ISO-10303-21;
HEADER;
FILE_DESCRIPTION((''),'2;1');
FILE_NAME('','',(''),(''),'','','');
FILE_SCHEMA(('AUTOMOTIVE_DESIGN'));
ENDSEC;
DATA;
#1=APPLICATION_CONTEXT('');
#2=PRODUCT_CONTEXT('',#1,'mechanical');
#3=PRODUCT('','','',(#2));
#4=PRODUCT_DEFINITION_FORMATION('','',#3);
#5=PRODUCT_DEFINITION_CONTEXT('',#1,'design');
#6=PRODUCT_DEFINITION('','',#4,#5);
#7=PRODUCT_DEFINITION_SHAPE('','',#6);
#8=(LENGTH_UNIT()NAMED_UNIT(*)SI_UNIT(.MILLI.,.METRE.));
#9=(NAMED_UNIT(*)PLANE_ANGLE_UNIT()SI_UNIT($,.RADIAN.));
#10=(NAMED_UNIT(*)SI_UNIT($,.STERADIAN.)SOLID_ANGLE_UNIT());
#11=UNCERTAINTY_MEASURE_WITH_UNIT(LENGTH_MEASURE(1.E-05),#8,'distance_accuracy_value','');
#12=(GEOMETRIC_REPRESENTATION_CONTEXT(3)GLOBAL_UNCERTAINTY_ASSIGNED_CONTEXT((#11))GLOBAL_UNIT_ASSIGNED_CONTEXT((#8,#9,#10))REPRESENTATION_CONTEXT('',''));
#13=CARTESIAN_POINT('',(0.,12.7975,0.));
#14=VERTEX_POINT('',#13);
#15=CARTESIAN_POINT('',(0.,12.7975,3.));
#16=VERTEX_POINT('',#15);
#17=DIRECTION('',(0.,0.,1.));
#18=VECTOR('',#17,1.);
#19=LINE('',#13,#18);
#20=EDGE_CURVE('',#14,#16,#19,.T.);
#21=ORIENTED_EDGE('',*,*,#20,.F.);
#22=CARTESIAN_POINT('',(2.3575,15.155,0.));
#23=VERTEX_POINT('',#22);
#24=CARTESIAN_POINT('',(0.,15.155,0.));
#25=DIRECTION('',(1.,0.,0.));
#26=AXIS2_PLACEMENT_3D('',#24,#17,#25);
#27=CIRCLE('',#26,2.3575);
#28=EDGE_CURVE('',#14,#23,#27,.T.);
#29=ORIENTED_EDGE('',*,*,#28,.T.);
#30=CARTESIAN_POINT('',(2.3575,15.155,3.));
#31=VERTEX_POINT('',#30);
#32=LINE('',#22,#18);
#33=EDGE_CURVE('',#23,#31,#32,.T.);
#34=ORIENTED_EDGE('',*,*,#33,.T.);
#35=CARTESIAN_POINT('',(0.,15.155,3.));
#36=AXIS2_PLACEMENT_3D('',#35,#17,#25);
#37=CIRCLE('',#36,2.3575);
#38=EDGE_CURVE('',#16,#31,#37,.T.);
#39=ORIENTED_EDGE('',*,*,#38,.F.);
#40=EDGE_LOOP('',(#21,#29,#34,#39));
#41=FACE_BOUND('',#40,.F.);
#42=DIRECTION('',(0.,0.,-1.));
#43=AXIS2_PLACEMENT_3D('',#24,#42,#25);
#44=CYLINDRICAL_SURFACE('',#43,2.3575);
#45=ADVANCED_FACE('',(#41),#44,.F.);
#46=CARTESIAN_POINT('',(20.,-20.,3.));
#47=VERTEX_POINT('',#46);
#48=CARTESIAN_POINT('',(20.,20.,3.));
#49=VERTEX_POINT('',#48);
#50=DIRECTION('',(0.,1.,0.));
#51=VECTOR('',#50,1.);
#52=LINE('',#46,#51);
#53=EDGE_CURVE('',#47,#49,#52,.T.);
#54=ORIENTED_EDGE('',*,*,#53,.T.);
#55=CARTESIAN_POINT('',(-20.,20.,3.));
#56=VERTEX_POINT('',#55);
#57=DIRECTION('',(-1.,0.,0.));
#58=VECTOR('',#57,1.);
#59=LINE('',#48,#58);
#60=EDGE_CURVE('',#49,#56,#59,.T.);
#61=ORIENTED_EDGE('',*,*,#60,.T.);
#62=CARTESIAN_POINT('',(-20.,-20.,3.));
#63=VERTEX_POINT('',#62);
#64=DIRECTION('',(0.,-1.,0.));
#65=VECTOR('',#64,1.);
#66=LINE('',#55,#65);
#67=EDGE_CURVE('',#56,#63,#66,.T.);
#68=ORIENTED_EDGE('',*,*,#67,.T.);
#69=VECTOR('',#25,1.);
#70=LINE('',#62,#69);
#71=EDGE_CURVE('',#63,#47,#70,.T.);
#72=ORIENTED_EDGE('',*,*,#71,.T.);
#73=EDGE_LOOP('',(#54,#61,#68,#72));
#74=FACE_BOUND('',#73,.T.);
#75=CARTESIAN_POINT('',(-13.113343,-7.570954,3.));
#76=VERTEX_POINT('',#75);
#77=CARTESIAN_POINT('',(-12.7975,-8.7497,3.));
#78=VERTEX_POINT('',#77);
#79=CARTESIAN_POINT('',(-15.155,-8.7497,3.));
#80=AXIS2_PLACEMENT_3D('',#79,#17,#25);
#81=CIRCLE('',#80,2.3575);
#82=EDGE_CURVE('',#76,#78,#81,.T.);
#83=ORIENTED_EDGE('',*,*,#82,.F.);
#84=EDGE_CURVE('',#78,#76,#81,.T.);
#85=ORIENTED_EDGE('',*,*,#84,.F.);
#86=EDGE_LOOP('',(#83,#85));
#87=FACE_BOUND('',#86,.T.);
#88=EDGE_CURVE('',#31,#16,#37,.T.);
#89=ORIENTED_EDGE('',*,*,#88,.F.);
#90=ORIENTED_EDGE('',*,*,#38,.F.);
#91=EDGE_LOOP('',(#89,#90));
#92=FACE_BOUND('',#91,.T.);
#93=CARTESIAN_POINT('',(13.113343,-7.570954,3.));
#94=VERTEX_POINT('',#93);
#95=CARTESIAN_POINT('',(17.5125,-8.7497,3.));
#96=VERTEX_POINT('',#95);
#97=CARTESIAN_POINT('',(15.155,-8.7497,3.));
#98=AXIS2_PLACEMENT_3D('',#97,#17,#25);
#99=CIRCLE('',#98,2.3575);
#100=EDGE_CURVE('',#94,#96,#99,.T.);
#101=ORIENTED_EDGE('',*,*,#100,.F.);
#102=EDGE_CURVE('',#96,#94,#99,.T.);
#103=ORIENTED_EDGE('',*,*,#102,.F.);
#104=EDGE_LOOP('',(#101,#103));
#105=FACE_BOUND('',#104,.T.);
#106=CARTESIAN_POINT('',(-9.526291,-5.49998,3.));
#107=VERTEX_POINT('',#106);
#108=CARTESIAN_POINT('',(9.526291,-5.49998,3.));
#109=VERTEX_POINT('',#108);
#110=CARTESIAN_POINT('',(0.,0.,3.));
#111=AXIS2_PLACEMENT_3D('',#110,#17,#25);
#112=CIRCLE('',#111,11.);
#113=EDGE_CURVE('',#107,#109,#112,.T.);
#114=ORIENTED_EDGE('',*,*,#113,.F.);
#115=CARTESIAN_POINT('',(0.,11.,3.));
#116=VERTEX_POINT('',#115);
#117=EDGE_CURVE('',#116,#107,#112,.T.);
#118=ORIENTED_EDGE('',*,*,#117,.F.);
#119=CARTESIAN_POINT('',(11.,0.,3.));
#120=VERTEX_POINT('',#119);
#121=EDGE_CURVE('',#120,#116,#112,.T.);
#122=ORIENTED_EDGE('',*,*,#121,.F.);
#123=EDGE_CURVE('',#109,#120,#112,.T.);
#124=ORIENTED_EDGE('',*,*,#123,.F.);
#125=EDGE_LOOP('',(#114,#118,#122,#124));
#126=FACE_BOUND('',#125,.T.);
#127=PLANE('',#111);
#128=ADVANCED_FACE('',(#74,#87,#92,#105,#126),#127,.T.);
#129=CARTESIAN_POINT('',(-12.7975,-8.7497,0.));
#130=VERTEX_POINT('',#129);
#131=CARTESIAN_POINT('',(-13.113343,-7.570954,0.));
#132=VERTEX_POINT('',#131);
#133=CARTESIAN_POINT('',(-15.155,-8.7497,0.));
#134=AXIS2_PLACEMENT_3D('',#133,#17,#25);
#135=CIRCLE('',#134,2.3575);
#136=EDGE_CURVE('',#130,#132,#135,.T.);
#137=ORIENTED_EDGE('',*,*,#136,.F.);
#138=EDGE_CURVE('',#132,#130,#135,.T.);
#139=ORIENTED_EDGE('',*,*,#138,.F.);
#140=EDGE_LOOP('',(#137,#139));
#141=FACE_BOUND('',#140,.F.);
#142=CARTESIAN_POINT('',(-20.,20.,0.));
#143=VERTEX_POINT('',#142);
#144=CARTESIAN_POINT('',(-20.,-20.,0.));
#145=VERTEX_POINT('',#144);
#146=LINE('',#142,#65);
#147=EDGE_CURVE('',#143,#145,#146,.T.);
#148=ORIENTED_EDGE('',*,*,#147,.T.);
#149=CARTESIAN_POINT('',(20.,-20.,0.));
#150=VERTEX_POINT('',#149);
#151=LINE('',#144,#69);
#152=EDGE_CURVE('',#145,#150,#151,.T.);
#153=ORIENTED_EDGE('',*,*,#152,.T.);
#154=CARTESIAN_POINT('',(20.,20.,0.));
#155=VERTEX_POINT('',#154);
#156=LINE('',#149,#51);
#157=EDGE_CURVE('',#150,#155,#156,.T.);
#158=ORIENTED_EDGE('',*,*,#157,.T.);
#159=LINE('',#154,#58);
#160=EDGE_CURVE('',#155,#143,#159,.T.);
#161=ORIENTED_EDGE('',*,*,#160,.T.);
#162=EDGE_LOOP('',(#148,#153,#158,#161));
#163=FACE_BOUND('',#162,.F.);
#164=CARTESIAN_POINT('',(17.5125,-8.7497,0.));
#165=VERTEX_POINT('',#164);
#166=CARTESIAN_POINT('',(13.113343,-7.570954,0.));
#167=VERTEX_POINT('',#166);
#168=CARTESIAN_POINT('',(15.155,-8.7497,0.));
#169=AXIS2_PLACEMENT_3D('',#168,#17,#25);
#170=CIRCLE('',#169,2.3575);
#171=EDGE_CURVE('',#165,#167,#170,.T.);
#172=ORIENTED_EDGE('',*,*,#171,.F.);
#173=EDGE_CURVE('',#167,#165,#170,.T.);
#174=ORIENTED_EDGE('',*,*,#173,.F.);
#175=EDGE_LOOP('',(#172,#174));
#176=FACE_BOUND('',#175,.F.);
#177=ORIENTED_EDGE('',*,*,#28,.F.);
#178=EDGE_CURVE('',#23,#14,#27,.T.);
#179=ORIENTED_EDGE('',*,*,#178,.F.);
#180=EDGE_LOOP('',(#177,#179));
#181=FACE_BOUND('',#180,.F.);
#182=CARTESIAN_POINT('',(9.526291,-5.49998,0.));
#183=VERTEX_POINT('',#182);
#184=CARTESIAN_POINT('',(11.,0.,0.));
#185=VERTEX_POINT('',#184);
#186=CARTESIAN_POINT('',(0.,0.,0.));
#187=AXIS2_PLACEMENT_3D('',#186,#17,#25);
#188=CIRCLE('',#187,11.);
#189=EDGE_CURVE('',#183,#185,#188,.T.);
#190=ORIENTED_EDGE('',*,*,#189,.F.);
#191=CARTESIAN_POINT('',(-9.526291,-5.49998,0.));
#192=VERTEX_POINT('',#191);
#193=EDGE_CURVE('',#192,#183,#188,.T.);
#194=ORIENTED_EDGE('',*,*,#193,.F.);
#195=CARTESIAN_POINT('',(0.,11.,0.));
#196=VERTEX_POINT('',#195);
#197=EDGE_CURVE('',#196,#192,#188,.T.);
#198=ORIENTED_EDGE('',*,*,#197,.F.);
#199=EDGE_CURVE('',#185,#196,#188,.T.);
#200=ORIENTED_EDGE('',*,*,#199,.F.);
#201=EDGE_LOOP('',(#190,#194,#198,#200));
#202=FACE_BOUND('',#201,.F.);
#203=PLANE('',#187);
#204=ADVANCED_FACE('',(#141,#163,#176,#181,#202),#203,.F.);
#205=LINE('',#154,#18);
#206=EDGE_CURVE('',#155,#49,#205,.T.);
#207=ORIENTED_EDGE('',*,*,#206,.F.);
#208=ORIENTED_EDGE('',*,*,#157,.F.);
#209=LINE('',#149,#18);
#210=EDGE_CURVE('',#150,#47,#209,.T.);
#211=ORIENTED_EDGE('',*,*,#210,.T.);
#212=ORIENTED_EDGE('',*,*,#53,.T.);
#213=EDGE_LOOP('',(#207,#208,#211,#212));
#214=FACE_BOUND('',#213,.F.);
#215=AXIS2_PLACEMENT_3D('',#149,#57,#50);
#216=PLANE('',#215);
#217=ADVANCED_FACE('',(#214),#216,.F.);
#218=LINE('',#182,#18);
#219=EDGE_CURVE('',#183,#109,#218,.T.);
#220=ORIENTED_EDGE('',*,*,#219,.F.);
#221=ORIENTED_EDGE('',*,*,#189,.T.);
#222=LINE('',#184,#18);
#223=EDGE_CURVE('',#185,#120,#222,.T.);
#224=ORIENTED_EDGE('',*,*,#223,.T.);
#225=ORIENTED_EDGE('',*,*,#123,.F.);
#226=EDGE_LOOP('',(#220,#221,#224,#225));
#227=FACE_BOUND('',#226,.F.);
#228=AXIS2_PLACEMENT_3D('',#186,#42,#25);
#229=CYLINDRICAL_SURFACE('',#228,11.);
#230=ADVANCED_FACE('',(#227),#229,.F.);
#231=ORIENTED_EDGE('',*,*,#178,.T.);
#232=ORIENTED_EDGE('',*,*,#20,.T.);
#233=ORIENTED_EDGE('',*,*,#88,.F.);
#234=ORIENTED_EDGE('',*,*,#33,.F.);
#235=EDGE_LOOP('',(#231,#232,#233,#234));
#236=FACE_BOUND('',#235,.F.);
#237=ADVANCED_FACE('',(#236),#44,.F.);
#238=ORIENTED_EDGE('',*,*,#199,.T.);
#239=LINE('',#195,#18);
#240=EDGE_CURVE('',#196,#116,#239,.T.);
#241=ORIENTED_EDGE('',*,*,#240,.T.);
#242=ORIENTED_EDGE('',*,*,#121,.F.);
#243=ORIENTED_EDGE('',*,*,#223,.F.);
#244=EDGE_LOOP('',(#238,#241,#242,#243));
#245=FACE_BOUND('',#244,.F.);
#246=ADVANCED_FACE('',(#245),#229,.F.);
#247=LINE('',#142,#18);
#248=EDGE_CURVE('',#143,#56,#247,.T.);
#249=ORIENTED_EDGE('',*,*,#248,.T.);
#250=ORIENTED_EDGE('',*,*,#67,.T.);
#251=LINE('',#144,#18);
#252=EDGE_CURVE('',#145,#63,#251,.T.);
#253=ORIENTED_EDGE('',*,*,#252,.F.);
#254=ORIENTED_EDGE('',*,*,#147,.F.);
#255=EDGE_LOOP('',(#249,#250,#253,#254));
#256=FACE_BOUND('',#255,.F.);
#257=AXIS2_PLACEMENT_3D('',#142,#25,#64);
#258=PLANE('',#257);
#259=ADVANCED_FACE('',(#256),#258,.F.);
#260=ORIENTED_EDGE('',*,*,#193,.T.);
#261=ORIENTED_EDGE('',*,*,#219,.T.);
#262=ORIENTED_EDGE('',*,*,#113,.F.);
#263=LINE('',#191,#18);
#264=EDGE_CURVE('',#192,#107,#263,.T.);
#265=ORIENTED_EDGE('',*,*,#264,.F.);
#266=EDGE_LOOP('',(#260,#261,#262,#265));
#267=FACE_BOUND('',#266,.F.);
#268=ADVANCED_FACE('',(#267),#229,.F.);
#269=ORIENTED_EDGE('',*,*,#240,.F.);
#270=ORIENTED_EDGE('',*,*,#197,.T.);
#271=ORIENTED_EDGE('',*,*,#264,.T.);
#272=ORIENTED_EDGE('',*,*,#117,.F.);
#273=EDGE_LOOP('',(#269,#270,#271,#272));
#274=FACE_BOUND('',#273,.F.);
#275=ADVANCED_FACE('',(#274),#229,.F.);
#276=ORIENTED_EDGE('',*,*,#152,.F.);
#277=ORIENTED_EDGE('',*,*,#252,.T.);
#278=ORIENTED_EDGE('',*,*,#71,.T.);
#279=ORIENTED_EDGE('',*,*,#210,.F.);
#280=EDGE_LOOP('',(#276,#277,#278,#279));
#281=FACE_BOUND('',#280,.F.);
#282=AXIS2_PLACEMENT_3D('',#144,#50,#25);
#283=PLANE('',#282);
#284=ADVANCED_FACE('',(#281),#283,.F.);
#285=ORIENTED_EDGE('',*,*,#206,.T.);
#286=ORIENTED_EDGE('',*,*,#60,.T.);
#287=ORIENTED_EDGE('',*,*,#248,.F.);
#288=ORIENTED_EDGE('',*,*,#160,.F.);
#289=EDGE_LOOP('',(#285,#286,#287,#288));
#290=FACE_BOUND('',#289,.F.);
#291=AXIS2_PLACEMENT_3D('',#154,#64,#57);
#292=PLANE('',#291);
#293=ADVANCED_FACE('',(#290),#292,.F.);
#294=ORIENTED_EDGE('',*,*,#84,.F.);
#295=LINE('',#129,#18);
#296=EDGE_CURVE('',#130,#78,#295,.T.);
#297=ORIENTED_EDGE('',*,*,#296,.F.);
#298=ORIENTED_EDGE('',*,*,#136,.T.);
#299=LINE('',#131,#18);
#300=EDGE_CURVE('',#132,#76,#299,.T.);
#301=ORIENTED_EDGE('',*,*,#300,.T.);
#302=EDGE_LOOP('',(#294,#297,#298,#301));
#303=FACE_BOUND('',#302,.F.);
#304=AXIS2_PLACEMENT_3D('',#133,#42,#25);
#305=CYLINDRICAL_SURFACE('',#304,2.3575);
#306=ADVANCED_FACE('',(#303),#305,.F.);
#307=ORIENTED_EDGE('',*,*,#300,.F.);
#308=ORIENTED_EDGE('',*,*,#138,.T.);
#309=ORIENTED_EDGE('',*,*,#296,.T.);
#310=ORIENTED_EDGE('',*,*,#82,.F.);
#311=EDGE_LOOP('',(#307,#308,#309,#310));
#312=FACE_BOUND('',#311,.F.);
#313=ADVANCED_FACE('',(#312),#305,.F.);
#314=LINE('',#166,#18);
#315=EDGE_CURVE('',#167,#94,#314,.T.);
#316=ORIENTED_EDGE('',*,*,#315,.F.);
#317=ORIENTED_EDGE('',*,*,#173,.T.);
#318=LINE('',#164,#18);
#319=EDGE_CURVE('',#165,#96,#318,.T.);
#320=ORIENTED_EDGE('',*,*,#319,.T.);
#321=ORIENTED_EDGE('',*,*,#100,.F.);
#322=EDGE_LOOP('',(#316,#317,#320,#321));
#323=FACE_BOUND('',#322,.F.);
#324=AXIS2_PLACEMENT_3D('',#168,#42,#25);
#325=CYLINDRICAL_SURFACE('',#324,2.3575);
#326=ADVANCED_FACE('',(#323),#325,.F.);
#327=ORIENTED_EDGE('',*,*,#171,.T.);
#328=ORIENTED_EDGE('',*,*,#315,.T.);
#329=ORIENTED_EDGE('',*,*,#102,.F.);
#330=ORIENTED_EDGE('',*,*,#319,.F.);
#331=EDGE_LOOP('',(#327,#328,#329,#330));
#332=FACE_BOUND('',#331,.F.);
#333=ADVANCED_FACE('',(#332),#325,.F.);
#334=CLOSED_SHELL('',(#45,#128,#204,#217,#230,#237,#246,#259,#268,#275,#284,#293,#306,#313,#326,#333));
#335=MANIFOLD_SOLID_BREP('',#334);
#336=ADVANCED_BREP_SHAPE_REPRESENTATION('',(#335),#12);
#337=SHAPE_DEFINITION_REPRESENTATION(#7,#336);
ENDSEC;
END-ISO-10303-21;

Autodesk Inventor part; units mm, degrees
ref_plane "YZ Plane" through (0, 0, 0) normal (1, 0, 0) x (0, 1, 0)
ref_plane "XZ Plane" through (0, 0, 0) normal (0, 1, 0) x (-1, 0, 0)
ref_plane "XY Plane" through (0, 0, 0) normal (0, 0, 1) x (1, 0, 0)
sketch "Sketch1" plane through (0, 0, 0) normal (0, 0, 1) x (1, 0, 0)
  line L0 (-20, -20) -> (20, -20)
  line L1 (20, -20) -> (20, 20)
  line L2 (20, 20) -> (-20, 20)
  line L3 (-20, 20) -> (-20, -20)
  line L4 (-20, -20) -> (20, 20) construction
  line L5 (20, -20) -> (-20, 20) construction
  circle A0 centre (0, 0) radius 11
  line L6 (0, 0) -> (0, 15.155)
  line L7 (0, 0) -> (15.155, -8.7497)
  line L8 (0, 0) -> (-15.155, -8.7497)
  circle A1 centre (0, 15.155) radius 2.3575
  circle A2 centre (15.155, -8.7497) radius 2.3575
  circle A3 centre (-15.155, -8.7497) radius 2.3575
  dimension "d0" = 40
  dimension "d1" = 40
  dimension "d2" = 22
  dimension "d3" = 15.155
  dimension "d4" = 15.155
  dimension "d5" = 120
  dimension "d6" = 15.155
  dimension "d7" = 120
  dimension "d8" = 4.715
  dimension "d9" = 4.715
  dimension "d10" = 4.715
extrude "Extrusion1" add sketch "Sketch1" along normal blind 3
equation "\"d1\" = d0"
equation "\"d4\" = d3"
equation "\"d6\" = d3"
equation "\"d7\" = d5"
equation "\"d9\" = d8"
equation "\"d10\" = d8"
properties part number "mount_v01"
